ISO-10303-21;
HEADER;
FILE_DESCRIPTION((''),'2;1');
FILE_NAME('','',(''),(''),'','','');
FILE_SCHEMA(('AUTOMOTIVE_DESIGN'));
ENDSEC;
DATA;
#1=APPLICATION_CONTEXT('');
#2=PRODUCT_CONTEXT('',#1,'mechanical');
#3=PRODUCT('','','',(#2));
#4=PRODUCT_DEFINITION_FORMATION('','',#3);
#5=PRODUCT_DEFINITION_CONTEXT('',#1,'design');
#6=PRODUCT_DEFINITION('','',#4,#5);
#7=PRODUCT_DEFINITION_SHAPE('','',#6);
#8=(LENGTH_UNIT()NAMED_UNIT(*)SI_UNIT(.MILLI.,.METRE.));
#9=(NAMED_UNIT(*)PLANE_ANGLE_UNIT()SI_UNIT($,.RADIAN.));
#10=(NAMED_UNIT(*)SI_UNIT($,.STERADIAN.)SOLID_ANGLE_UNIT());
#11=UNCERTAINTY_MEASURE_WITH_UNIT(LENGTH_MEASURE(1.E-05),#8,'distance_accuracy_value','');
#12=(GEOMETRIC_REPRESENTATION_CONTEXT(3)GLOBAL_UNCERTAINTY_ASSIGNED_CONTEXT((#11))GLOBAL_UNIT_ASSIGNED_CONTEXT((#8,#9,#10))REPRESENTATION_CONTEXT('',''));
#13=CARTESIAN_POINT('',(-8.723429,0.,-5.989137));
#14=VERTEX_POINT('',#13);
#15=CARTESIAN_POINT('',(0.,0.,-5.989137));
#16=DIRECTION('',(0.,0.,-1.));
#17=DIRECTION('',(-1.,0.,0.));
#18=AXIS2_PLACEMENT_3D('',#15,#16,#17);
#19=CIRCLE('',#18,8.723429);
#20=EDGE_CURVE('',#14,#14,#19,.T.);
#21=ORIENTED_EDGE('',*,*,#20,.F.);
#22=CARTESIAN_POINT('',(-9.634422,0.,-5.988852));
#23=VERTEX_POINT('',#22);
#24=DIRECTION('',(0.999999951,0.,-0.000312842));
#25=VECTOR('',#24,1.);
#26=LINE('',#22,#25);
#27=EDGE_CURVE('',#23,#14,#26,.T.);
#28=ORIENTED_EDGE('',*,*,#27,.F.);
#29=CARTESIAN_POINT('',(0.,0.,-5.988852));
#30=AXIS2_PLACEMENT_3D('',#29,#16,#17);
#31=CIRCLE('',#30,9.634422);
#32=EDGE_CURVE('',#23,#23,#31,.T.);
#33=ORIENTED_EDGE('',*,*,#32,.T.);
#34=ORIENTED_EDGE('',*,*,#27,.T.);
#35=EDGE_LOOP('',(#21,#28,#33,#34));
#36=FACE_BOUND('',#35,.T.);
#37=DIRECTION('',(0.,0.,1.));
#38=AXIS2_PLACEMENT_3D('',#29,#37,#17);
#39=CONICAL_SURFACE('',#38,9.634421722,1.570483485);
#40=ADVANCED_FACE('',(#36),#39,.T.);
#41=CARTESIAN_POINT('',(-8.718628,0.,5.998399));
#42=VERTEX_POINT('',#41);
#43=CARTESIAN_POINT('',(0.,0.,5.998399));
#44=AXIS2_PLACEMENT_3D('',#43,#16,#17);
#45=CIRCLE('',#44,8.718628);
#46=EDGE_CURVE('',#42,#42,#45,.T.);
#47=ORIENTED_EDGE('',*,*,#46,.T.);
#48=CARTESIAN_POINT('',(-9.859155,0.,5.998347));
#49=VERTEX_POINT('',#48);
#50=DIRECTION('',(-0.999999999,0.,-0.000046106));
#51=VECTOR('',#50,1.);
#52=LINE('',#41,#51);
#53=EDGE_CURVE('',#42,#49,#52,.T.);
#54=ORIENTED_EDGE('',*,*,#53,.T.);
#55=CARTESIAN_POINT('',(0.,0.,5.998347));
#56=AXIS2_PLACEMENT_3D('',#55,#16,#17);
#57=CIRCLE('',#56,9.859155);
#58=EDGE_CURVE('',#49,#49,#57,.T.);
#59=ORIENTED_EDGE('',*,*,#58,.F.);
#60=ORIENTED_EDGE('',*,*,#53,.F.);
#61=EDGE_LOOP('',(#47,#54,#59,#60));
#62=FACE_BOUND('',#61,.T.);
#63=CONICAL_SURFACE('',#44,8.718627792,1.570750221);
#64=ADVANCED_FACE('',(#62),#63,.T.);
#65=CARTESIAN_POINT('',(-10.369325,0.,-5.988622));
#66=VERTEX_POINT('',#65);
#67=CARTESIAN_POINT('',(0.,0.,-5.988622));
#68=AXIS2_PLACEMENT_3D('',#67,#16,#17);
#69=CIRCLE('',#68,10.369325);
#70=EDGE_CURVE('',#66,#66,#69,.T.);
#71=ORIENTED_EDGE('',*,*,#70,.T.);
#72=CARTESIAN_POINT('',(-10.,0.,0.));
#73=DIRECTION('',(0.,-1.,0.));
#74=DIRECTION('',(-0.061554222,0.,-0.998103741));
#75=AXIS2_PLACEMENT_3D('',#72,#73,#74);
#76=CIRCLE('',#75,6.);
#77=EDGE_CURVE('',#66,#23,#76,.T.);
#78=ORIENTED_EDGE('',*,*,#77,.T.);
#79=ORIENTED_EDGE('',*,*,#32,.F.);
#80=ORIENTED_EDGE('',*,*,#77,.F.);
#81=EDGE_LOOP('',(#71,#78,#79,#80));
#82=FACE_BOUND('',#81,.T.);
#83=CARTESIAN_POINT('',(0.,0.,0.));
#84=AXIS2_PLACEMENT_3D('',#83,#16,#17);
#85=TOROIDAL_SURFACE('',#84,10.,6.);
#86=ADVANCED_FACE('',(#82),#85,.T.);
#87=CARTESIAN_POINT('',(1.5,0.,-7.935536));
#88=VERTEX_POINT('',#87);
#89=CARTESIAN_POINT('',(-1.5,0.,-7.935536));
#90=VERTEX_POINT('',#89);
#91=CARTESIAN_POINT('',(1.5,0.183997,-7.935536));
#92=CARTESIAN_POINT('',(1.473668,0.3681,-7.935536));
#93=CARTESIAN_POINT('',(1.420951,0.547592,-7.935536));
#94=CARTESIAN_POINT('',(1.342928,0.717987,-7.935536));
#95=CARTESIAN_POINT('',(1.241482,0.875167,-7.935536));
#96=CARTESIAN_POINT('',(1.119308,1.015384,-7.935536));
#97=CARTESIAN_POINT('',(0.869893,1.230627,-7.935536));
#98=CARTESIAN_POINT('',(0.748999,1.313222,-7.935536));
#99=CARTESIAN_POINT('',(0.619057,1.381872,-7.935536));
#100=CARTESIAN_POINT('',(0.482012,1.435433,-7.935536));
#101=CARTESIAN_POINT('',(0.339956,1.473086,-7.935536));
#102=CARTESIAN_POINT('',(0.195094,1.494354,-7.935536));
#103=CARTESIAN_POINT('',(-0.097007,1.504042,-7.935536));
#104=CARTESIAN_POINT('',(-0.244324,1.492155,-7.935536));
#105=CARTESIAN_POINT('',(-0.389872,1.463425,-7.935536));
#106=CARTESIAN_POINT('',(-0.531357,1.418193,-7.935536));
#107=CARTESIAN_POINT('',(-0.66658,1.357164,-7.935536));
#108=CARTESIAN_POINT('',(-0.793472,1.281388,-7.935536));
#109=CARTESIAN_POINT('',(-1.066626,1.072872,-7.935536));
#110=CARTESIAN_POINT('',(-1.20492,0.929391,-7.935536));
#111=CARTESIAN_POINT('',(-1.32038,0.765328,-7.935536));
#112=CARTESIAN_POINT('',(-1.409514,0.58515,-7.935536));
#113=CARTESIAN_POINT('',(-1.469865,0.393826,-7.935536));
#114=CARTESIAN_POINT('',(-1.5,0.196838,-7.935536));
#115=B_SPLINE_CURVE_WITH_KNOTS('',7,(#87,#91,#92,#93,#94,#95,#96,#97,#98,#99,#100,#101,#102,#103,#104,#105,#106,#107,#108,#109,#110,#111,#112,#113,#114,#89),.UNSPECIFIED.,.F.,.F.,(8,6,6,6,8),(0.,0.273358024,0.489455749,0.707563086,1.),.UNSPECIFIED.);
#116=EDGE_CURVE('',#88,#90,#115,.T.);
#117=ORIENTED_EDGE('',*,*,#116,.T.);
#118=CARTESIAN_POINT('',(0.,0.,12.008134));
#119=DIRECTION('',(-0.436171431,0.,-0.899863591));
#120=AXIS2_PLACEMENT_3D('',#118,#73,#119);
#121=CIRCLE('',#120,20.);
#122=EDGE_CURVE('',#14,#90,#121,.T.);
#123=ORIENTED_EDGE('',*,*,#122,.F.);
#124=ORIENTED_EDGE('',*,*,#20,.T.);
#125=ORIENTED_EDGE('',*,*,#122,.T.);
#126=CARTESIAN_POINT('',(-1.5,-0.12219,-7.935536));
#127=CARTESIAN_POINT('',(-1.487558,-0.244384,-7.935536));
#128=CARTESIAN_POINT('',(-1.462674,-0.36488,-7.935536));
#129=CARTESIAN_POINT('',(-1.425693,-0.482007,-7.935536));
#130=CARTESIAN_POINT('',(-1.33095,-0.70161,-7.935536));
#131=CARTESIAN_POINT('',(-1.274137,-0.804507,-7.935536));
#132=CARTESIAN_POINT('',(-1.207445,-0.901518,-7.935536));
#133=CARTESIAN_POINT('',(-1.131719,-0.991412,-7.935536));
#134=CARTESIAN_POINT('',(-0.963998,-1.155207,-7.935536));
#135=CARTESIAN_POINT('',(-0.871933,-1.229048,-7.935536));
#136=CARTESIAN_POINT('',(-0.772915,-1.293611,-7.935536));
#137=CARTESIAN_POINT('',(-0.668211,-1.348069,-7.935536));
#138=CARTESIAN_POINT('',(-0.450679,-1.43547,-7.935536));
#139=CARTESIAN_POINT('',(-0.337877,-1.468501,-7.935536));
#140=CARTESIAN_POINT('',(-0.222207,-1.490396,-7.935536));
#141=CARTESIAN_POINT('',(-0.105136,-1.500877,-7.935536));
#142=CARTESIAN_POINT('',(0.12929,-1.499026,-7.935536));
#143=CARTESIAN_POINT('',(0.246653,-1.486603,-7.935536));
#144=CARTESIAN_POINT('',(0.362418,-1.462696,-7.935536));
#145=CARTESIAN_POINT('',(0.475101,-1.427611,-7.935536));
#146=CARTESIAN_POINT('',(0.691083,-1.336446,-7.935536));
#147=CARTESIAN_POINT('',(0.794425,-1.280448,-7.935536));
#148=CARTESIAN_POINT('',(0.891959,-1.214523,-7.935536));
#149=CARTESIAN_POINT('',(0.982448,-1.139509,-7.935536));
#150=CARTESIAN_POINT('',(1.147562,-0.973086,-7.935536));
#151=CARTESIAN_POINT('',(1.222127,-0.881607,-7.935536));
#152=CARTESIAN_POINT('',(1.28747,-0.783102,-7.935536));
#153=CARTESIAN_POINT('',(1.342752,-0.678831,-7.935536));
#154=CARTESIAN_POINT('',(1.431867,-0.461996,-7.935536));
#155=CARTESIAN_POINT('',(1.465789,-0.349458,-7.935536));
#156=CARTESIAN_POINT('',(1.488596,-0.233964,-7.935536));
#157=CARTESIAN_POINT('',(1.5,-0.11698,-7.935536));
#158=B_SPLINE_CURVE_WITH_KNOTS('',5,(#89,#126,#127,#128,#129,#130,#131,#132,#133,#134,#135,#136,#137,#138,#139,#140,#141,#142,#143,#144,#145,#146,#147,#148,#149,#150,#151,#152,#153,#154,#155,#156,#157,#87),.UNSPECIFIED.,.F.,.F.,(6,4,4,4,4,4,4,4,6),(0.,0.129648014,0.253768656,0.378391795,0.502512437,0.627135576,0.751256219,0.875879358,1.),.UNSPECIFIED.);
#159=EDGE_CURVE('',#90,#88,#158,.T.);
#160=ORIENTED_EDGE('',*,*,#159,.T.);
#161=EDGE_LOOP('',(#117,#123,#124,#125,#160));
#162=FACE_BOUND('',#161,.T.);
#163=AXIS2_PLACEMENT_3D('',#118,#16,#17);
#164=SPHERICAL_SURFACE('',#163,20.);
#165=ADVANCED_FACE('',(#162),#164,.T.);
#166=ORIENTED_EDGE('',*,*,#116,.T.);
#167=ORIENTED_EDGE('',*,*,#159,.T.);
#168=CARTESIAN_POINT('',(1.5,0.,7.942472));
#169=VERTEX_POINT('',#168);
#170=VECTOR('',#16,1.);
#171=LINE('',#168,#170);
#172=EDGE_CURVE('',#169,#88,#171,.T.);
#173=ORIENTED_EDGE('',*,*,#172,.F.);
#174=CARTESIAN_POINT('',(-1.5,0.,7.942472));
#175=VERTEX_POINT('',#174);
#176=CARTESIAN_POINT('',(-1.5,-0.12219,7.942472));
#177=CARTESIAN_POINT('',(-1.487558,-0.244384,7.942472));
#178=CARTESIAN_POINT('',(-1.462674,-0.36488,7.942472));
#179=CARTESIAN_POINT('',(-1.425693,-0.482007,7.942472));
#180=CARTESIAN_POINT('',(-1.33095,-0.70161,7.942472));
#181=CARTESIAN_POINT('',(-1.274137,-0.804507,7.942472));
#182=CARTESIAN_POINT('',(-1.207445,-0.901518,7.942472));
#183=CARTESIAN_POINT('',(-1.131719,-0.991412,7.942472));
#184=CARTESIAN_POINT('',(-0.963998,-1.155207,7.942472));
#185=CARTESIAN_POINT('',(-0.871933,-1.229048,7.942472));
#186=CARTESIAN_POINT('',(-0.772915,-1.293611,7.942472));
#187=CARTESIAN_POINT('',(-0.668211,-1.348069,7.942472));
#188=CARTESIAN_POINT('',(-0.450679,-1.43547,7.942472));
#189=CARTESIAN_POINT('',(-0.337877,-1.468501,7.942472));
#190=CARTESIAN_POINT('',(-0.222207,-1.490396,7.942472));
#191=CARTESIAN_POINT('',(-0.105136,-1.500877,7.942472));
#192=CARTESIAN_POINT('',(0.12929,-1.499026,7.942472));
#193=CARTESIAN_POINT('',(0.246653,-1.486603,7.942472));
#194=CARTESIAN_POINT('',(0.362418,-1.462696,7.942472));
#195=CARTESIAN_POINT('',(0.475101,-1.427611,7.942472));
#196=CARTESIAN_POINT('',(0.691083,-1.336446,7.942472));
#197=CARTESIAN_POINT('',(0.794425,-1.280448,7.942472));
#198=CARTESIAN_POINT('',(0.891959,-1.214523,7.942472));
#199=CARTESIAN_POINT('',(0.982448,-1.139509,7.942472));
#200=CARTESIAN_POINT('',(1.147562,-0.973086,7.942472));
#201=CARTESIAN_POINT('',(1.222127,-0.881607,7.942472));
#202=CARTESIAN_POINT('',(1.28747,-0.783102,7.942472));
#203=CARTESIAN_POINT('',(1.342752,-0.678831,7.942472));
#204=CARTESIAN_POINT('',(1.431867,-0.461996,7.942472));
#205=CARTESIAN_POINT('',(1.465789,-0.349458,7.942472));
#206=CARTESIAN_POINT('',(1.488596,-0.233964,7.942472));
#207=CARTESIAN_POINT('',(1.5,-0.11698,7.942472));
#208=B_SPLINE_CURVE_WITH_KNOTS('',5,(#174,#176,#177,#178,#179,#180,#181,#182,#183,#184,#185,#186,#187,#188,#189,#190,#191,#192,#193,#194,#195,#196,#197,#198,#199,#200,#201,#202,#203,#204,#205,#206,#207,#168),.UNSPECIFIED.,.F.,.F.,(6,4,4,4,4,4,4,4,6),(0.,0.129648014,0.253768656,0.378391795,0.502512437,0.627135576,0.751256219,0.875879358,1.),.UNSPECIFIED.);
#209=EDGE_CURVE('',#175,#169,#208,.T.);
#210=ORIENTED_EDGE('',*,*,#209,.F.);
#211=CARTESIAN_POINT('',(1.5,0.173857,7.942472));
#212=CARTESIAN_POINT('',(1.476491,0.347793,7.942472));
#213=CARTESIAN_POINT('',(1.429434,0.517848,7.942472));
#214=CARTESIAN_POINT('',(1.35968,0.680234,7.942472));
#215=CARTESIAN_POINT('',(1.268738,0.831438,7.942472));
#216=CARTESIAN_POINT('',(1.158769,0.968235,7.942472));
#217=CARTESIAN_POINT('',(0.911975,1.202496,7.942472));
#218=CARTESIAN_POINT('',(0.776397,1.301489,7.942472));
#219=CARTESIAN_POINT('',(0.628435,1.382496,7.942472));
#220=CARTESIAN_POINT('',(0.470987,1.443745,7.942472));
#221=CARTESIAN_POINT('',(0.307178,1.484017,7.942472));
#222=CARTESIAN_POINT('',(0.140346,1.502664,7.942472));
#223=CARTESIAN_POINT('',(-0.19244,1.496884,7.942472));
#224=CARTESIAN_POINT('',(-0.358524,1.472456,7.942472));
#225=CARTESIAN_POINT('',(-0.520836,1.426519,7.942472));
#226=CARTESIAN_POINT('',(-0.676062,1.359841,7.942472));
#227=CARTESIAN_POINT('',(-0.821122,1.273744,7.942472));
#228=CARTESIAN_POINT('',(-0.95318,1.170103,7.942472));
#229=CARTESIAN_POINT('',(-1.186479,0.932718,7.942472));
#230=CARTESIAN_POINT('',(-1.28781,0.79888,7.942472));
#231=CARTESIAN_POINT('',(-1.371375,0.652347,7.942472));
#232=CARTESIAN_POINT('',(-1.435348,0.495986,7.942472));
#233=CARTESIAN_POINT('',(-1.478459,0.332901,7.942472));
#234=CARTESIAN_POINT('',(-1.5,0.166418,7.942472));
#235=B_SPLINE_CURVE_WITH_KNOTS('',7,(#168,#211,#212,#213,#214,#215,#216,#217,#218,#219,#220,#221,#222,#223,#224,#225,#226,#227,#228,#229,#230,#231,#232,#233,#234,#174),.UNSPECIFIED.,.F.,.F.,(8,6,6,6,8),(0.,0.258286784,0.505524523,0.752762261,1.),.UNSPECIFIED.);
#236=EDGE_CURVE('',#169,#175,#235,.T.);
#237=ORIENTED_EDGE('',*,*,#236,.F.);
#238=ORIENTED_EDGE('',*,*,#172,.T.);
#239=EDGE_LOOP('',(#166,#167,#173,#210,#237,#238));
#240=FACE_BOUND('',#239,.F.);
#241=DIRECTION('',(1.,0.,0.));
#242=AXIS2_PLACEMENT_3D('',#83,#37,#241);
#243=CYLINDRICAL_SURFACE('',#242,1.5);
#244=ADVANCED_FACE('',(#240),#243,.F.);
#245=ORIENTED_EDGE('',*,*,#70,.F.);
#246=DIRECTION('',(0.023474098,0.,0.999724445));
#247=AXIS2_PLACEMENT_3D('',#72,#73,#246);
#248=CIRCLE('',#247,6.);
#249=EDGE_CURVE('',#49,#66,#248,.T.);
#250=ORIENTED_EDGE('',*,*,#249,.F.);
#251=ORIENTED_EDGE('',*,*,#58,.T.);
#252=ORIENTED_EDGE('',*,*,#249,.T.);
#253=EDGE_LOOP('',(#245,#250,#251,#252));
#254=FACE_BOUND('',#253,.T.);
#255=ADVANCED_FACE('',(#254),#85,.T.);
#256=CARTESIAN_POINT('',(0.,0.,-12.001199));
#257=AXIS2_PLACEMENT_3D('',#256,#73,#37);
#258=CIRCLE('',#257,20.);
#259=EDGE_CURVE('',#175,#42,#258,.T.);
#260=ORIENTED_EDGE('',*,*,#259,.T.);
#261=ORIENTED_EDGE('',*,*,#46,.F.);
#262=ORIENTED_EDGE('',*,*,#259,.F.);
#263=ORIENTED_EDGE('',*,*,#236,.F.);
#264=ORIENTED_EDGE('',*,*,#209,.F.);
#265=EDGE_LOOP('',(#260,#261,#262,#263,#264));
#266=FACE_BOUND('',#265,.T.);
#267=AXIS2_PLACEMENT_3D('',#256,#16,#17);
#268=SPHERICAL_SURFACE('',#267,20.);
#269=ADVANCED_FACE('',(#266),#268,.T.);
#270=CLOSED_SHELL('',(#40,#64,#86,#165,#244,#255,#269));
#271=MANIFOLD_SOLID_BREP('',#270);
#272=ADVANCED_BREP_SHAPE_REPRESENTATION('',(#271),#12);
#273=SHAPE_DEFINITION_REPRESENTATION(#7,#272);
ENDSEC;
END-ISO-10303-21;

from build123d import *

# Parameters (mm, degrees)
F2_R          = 1.5
F3_DEPTH      = 7.9928655241
F3_DEPTH_BACK = 7.9998012227


with BuildPart() as f1:
    # F0 (on Front) → F1 (revolve)
    with BuildSketch(Plane.XZ):
        with BuildLine():
            Line((-9.6344217221, -5.9888523544), (-8.7234286139, -5.9891373512))
            ThreePointArc((-8.7234286139, -5.9891373512), (-4.4751851056, -7.4847544396), (0, -7.9918655241))
            Line((0, -7.9918655241), (0, 7.9988012227))
            ThreePointArc((0, 7.9988012227), (-4.4725853427, 7.4922868103), (-8.7186277917, 5.9983992579))
            Line((-8.7186277917, 5.9983992579), (-9.8591554132, 5.9983466724))
            ThreePointArc((-9.8591554132, 5.9983466724), (-15.9945732144, 0.2551312938), (-10.3693253336, -5.9886224458))
            Line((-10.3693253336, -5.9886224458), (-9.6344217221, -5.9888523544))
        make_face()
        with BuildLine():
            ThreePointArc((-10.3693253336, -5.9886224458), (-10.0018770511, -5.9999997064), (-9.6344217221, -5.9888523544))
            Line((-9.6344217221, -5.9888523544), (-10.3693253336, -5.9886224458))
        make_face()
    revolve(axis=Axis((0, 0, 0.0034678493), (0, 0, -1)))

    # F2 (on Top) → F3 (cut, two sides)
    with BuildSketch(Plane.XY) as f3_sk:
        Circle(F2_R)
    extrude(amount=-F3_DEPTH, mode=Mode.SUBTRACT)
    extrude(f3_sk.sketch, amount=F3_DEPTH_BACK, mode=Mode.SUBTRACT)


solid = f1.part
